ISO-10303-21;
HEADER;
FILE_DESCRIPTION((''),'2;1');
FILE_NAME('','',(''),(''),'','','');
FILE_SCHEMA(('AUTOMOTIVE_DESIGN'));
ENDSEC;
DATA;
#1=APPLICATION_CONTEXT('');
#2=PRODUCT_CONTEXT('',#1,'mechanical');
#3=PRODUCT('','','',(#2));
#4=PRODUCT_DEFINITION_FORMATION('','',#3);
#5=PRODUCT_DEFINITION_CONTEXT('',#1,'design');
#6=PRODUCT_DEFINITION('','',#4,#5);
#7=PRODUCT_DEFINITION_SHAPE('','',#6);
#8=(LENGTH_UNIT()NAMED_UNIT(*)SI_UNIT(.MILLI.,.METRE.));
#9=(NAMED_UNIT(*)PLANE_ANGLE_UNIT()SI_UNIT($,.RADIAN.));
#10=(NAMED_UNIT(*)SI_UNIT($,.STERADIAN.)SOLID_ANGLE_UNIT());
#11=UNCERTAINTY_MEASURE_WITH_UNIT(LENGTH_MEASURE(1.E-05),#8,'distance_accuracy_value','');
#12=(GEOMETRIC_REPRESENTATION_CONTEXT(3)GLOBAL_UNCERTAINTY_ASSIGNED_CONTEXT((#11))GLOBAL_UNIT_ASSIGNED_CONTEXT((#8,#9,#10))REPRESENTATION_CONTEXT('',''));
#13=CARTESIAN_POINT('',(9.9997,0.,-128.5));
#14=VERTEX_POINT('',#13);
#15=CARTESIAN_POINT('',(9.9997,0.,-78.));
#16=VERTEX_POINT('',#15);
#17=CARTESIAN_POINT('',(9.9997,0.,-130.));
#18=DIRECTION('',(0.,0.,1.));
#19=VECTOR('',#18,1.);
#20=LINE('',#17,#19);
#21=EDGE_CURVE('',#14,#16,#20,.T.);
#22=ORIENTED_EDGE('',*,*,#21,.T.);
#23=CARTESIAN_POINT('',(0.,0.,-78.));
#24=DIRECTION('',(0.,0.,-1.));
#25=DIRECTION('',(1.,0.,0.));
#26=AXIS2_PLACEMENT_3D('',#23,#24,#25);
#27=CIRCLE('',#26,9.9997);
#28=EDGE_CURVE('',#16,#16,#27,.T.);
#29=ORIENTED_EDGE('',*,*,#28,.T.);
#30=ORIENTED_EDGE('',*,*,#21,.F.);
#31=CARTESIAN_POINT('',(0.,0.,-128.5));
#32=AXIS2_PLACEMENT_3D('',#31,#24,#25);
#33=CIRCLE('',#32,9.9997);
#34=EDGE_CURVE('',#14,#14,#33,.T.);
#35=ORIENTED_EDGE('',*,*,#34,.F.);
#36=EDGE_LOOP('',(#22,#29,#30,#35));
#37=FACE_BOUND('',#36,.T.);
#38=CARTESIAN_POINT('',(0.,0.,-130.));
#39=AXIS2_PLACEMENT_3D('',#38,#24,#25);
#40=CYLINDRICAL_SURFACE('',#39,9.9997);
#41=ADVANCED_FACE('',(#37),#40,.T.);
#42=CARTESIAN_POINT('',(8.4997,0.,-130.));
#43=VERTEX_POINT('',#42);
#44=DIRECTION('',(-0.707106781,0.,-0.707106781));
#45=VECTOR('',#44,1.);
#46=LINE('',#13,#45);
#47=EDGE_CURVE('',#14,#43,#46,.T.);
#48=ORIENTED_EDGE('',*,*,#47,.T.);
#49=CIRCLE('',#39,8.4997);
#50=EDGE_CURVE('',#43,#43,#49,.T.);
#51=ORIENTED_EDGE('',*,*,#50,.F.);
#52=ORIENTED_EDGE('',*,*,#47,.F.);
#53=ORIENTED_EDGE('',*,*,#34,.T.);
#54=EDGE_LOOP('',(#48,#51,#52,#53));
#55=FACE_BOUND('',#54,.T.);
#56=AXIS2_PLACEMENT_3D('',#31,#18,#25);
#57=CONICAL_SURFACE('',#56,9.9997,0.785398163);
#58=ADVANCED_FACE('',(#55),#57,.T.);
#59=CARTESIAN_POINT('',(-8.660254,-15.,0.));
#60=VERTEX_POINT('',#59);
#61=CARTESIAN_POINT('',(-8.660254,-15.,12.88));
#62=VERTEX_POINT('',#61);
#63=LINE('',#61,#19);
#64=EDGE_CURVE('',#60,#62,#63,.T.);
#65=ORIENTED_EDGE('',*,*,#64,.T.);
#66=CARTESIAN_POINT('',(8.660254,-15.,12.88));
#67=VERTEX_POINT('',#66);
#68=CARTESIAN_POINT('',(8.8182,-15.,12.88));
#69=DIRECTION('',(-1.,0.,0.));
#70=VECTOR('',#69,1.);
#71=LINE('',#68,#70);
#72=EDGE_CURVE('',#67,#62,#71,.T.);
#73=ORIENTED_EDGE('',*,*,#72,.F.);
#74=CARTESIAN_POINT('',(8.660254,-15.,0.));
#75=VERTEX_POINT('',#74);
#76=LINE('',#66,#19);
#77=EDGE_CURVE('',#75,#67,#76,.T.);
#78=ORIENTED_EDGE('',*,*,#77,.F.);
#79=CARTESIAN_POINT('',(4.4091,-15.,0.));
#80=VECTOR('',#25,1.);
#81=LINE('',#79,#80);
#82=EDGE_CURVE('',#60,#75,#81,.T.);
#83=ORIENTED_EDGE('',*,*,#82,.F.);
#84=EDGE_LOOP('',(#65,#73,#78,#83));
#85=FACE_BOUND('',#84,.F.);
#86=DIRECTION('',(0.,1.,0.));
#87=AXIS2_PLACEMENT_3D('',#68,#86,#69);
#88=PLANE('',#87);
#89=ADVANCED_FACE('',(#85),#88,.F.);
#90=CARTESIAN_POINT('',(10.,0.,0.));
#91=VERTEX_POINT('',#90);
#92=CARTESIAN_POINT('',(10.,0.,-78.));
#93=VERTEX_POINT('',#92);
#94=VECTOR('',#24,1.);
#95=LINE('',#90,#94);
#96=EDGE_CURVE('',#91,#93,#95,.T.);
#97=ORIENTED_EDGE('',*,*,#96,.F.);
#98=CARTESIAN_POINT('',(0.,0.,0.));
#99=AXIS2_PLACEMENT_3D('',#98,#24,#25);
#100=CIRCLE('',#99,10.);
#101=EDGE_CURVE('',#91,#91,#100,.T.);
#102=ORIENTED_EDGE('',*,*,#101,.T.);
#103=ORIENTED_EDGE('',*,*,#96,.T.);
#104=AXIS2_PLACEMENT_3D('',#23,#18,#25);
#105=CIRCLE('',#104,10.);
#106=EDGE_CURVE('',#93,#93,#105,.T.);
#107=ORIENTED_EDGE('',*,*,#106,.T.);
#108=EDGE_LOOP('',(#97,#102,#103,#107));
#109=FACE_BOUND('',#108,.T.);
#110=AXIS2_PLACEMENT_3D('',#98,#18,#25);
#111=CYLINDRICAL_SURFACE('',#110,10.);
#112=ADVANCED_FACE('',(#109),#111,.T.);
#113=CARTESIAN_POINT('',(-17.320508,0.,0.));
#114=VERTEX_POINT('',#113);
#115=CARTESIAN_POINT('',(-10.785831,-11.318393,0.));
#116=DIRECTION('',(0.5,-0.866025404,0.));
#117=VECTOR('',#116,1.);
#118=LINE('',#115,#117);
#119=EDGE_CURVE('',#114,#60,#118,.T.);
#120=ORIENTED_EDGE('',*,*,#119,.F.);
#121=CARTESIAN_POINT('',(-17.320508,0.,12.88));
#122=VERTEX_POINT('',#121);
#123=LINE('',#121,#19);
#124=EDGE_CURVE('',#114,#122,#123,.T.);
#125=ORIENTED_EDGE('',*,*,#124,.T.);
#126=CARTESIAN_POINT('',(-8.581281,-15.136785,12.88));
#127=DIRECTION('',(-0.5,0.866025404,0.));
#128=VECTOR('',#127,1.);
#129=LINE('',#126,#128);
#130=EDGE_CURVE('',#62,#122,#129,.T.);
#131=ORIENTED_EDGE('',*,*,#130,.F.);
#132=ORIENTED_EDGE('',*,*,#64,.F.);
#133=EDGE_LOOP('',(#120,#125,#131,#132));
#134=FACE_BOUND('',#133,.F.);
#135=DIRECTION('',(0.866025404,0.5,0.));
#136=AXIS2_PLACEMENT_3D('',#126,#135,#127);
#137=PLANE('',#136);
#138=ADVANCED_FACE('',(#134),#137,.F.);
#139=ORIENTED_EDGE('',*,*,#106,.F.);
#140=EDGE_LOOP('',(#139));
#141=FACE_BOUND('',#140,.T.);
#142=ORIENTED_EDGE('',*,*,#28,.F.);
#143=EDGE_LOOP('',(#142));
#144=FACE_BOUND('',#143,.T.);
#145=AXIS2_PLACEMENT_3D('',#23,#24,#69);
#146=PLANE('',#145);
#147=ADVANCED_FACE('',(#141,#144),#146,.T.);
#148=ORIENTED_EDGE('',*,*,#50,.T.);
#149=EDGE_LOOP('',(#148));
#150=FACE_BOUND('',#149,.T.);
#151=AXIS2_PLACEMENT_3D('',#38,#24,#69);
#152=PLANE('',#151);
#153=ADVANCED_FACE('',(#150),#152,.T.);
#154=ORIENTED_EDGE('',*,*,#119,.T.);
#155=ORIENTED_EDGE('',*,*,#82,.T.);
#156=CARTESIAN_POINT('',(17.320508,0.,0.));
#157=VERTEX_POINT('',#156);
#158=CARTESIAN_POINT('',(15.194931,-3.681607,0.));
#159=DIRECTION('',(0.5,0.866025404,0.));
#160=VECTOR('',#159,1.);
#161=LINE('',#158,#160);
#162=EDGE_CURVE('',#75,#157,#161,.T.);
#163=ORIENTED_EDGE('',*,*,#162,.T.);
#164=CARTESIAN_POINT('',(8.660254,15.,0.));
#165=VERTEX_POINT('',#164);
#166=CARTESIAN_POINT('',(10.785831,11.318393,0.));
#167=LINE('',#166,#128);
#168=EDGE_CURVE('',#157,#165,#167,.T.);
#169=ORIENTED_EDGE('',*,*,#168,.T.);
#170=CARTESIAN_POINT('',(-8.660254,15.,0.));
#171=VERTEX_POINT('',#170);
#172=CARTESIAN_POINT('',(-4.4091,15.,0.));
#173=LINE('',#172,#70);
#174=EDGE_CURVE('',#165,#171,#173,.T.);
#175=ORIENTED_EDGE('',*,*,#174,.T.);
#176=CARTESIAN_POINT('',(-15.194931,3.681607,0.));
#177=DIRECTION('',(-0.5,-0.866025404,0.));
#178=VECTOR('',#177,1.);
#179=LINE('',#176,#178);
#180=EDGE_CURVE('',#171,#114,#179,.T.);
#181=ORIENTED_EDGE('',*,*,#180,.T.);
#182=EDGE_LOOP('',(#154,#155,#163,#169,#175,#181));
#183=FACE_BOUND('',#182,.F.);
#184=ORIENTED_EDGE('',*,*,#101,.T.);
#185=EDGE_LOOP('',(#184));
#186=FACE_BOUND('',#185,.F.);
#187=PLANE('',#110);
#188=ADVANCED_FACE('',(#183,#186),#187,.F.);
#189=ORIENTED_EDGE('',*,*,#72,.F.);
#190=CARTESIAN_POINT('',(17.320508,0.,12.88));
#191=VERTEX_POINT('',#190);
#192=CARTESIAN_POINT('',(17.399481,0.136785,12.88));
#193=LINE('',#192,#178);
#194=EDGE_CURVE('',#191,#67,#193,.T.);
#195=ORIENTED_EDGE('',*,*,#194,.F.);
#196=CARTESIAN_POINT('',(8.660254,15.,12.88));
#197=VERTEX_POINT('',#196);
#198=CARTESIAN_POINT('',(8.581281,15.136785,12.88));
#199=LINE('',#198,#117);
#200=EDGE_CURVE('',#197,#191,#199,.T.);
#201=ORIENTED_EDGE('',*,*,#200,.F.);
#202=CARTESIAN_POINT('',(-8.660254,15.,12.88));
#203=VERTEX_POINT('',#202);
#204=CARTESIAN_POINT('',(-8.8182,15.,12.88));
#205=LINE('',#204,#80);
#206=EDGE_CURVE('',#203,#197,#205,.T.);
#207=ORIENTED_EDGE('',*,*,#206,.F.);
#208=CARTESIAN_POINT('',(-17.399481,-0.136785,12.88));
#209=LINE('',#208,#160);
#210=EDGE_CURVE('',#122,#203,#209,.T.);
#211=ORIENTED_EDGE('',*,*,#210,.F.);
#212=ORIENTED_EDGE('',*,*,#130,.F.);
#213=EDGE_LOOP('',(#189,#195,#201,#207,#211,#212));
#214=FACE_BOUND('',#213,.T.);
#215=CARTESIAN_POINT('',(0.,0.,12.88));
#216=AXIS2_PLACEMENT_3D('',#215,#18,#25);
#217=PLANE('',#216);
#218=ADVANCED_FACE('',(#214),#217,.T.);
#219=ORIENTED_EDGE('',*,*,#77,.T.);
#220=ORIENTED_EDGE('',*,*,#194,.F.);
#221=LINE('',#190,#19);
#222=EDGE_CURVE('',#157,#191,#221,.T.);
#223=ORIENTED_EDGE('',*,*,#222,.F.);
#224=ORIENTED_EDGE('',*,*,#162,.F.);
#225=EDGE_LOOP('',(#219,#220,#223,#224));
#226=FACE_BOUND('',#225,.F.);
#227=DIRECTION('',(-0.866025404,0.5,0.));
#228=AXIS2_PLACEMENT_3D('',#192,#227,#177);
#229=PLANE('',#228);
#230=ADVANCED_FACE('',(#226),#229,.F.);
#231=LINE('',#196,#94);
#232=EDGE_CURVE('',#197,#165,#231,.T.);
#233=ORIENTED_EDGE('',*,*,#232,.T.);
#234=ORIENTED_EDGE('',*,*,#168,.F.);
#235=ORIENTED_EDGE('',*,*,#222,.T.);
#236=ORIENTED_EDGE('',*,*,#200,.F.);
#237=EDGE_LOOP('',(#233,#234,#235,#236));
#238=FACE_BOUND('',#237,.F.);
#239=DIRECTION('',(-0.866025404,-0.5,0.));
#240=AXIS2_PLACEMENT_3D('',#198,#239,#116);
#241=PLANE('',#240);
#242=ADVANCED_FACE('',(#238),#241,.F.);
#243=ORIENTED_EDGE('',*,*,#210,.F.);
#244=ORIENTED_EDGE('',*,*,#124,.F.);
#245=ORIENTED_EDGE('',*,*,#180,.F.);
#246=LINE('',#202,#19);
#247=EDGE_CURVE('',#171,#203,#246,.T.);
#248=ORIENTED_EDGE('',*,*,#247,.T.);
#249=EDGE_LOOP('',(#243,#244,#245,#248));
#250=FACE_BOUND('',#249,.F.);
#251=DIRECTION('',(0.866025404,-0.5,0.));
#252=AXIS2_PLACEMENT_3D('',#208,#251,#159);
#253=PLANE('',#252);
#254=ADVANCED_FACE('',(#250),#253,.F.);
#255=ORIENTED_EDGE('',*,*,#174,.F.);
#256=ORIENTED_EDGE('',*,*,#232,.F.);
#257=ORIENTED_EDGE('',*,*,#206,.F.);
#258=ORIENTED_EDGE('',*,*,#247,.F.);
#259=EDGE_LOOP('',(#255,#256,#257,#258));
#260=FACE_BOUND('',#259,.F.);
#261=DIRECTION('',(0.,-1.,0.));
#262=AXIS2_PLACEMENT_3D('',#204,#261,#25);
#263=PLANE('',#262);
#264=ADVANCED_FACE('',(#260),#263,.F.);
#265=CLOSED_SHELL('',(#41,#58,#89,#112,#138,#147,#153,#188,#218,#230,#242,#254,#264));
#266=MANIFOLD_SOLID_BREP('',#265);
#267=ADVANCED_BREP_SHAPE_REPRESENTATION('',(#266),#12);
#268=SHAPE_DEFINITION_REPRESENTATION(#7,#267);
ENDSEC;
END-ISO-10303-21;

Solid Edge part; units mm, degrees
sketch "Sketch1" plane through (0, 0, 0) normal (0, 0, 1) x (1, 0, 0)
  circle A0 centre (0, 0) radius 17.4
  dimension "D1" = 34.8
extrude "Protrusion1" add sketch "Sketch1" along normal blind 12.88
sketch "Sketch2" plane through (0, 0, 0) normal (0, 0, -1) x (1, 0, 0)
  circle A0 centre (0, 0) radius 10
extrude "Protrusion2" add sketch "Sketch2" along normal blind 130
sketch "Sketch3" plane through (0, 0, -130) normal (0, 0, -1) x (1, 0, 0)
  circle A0 centre (0, 0) radius 9.9997
extrude "Cutout1" cut sketch "Sketch3" against normal blind 52 flip side to cut
chamfer "Chamfer_1" distance 1.5 angle 45 1 edges at (-9.9997, 0, -130)
sketch "Sketch4" plane through (0, 0, 12.88) normal (0, 0, 1) x (1, 0, 0)
  line L0 (-8.8182, 15) -> (8.8182, 15)
  dimension "D1" = 30
extrude "Cutout2" cut sketch "Sketch4" against normal up to next material side at (0, 15.05, 12.88)
pattern_circular "Pattern1" count 6 over 360 about axis through (0, 0, 12.88) along (0, 0, 1) of "Cutout2"
properties part number "24104722"
